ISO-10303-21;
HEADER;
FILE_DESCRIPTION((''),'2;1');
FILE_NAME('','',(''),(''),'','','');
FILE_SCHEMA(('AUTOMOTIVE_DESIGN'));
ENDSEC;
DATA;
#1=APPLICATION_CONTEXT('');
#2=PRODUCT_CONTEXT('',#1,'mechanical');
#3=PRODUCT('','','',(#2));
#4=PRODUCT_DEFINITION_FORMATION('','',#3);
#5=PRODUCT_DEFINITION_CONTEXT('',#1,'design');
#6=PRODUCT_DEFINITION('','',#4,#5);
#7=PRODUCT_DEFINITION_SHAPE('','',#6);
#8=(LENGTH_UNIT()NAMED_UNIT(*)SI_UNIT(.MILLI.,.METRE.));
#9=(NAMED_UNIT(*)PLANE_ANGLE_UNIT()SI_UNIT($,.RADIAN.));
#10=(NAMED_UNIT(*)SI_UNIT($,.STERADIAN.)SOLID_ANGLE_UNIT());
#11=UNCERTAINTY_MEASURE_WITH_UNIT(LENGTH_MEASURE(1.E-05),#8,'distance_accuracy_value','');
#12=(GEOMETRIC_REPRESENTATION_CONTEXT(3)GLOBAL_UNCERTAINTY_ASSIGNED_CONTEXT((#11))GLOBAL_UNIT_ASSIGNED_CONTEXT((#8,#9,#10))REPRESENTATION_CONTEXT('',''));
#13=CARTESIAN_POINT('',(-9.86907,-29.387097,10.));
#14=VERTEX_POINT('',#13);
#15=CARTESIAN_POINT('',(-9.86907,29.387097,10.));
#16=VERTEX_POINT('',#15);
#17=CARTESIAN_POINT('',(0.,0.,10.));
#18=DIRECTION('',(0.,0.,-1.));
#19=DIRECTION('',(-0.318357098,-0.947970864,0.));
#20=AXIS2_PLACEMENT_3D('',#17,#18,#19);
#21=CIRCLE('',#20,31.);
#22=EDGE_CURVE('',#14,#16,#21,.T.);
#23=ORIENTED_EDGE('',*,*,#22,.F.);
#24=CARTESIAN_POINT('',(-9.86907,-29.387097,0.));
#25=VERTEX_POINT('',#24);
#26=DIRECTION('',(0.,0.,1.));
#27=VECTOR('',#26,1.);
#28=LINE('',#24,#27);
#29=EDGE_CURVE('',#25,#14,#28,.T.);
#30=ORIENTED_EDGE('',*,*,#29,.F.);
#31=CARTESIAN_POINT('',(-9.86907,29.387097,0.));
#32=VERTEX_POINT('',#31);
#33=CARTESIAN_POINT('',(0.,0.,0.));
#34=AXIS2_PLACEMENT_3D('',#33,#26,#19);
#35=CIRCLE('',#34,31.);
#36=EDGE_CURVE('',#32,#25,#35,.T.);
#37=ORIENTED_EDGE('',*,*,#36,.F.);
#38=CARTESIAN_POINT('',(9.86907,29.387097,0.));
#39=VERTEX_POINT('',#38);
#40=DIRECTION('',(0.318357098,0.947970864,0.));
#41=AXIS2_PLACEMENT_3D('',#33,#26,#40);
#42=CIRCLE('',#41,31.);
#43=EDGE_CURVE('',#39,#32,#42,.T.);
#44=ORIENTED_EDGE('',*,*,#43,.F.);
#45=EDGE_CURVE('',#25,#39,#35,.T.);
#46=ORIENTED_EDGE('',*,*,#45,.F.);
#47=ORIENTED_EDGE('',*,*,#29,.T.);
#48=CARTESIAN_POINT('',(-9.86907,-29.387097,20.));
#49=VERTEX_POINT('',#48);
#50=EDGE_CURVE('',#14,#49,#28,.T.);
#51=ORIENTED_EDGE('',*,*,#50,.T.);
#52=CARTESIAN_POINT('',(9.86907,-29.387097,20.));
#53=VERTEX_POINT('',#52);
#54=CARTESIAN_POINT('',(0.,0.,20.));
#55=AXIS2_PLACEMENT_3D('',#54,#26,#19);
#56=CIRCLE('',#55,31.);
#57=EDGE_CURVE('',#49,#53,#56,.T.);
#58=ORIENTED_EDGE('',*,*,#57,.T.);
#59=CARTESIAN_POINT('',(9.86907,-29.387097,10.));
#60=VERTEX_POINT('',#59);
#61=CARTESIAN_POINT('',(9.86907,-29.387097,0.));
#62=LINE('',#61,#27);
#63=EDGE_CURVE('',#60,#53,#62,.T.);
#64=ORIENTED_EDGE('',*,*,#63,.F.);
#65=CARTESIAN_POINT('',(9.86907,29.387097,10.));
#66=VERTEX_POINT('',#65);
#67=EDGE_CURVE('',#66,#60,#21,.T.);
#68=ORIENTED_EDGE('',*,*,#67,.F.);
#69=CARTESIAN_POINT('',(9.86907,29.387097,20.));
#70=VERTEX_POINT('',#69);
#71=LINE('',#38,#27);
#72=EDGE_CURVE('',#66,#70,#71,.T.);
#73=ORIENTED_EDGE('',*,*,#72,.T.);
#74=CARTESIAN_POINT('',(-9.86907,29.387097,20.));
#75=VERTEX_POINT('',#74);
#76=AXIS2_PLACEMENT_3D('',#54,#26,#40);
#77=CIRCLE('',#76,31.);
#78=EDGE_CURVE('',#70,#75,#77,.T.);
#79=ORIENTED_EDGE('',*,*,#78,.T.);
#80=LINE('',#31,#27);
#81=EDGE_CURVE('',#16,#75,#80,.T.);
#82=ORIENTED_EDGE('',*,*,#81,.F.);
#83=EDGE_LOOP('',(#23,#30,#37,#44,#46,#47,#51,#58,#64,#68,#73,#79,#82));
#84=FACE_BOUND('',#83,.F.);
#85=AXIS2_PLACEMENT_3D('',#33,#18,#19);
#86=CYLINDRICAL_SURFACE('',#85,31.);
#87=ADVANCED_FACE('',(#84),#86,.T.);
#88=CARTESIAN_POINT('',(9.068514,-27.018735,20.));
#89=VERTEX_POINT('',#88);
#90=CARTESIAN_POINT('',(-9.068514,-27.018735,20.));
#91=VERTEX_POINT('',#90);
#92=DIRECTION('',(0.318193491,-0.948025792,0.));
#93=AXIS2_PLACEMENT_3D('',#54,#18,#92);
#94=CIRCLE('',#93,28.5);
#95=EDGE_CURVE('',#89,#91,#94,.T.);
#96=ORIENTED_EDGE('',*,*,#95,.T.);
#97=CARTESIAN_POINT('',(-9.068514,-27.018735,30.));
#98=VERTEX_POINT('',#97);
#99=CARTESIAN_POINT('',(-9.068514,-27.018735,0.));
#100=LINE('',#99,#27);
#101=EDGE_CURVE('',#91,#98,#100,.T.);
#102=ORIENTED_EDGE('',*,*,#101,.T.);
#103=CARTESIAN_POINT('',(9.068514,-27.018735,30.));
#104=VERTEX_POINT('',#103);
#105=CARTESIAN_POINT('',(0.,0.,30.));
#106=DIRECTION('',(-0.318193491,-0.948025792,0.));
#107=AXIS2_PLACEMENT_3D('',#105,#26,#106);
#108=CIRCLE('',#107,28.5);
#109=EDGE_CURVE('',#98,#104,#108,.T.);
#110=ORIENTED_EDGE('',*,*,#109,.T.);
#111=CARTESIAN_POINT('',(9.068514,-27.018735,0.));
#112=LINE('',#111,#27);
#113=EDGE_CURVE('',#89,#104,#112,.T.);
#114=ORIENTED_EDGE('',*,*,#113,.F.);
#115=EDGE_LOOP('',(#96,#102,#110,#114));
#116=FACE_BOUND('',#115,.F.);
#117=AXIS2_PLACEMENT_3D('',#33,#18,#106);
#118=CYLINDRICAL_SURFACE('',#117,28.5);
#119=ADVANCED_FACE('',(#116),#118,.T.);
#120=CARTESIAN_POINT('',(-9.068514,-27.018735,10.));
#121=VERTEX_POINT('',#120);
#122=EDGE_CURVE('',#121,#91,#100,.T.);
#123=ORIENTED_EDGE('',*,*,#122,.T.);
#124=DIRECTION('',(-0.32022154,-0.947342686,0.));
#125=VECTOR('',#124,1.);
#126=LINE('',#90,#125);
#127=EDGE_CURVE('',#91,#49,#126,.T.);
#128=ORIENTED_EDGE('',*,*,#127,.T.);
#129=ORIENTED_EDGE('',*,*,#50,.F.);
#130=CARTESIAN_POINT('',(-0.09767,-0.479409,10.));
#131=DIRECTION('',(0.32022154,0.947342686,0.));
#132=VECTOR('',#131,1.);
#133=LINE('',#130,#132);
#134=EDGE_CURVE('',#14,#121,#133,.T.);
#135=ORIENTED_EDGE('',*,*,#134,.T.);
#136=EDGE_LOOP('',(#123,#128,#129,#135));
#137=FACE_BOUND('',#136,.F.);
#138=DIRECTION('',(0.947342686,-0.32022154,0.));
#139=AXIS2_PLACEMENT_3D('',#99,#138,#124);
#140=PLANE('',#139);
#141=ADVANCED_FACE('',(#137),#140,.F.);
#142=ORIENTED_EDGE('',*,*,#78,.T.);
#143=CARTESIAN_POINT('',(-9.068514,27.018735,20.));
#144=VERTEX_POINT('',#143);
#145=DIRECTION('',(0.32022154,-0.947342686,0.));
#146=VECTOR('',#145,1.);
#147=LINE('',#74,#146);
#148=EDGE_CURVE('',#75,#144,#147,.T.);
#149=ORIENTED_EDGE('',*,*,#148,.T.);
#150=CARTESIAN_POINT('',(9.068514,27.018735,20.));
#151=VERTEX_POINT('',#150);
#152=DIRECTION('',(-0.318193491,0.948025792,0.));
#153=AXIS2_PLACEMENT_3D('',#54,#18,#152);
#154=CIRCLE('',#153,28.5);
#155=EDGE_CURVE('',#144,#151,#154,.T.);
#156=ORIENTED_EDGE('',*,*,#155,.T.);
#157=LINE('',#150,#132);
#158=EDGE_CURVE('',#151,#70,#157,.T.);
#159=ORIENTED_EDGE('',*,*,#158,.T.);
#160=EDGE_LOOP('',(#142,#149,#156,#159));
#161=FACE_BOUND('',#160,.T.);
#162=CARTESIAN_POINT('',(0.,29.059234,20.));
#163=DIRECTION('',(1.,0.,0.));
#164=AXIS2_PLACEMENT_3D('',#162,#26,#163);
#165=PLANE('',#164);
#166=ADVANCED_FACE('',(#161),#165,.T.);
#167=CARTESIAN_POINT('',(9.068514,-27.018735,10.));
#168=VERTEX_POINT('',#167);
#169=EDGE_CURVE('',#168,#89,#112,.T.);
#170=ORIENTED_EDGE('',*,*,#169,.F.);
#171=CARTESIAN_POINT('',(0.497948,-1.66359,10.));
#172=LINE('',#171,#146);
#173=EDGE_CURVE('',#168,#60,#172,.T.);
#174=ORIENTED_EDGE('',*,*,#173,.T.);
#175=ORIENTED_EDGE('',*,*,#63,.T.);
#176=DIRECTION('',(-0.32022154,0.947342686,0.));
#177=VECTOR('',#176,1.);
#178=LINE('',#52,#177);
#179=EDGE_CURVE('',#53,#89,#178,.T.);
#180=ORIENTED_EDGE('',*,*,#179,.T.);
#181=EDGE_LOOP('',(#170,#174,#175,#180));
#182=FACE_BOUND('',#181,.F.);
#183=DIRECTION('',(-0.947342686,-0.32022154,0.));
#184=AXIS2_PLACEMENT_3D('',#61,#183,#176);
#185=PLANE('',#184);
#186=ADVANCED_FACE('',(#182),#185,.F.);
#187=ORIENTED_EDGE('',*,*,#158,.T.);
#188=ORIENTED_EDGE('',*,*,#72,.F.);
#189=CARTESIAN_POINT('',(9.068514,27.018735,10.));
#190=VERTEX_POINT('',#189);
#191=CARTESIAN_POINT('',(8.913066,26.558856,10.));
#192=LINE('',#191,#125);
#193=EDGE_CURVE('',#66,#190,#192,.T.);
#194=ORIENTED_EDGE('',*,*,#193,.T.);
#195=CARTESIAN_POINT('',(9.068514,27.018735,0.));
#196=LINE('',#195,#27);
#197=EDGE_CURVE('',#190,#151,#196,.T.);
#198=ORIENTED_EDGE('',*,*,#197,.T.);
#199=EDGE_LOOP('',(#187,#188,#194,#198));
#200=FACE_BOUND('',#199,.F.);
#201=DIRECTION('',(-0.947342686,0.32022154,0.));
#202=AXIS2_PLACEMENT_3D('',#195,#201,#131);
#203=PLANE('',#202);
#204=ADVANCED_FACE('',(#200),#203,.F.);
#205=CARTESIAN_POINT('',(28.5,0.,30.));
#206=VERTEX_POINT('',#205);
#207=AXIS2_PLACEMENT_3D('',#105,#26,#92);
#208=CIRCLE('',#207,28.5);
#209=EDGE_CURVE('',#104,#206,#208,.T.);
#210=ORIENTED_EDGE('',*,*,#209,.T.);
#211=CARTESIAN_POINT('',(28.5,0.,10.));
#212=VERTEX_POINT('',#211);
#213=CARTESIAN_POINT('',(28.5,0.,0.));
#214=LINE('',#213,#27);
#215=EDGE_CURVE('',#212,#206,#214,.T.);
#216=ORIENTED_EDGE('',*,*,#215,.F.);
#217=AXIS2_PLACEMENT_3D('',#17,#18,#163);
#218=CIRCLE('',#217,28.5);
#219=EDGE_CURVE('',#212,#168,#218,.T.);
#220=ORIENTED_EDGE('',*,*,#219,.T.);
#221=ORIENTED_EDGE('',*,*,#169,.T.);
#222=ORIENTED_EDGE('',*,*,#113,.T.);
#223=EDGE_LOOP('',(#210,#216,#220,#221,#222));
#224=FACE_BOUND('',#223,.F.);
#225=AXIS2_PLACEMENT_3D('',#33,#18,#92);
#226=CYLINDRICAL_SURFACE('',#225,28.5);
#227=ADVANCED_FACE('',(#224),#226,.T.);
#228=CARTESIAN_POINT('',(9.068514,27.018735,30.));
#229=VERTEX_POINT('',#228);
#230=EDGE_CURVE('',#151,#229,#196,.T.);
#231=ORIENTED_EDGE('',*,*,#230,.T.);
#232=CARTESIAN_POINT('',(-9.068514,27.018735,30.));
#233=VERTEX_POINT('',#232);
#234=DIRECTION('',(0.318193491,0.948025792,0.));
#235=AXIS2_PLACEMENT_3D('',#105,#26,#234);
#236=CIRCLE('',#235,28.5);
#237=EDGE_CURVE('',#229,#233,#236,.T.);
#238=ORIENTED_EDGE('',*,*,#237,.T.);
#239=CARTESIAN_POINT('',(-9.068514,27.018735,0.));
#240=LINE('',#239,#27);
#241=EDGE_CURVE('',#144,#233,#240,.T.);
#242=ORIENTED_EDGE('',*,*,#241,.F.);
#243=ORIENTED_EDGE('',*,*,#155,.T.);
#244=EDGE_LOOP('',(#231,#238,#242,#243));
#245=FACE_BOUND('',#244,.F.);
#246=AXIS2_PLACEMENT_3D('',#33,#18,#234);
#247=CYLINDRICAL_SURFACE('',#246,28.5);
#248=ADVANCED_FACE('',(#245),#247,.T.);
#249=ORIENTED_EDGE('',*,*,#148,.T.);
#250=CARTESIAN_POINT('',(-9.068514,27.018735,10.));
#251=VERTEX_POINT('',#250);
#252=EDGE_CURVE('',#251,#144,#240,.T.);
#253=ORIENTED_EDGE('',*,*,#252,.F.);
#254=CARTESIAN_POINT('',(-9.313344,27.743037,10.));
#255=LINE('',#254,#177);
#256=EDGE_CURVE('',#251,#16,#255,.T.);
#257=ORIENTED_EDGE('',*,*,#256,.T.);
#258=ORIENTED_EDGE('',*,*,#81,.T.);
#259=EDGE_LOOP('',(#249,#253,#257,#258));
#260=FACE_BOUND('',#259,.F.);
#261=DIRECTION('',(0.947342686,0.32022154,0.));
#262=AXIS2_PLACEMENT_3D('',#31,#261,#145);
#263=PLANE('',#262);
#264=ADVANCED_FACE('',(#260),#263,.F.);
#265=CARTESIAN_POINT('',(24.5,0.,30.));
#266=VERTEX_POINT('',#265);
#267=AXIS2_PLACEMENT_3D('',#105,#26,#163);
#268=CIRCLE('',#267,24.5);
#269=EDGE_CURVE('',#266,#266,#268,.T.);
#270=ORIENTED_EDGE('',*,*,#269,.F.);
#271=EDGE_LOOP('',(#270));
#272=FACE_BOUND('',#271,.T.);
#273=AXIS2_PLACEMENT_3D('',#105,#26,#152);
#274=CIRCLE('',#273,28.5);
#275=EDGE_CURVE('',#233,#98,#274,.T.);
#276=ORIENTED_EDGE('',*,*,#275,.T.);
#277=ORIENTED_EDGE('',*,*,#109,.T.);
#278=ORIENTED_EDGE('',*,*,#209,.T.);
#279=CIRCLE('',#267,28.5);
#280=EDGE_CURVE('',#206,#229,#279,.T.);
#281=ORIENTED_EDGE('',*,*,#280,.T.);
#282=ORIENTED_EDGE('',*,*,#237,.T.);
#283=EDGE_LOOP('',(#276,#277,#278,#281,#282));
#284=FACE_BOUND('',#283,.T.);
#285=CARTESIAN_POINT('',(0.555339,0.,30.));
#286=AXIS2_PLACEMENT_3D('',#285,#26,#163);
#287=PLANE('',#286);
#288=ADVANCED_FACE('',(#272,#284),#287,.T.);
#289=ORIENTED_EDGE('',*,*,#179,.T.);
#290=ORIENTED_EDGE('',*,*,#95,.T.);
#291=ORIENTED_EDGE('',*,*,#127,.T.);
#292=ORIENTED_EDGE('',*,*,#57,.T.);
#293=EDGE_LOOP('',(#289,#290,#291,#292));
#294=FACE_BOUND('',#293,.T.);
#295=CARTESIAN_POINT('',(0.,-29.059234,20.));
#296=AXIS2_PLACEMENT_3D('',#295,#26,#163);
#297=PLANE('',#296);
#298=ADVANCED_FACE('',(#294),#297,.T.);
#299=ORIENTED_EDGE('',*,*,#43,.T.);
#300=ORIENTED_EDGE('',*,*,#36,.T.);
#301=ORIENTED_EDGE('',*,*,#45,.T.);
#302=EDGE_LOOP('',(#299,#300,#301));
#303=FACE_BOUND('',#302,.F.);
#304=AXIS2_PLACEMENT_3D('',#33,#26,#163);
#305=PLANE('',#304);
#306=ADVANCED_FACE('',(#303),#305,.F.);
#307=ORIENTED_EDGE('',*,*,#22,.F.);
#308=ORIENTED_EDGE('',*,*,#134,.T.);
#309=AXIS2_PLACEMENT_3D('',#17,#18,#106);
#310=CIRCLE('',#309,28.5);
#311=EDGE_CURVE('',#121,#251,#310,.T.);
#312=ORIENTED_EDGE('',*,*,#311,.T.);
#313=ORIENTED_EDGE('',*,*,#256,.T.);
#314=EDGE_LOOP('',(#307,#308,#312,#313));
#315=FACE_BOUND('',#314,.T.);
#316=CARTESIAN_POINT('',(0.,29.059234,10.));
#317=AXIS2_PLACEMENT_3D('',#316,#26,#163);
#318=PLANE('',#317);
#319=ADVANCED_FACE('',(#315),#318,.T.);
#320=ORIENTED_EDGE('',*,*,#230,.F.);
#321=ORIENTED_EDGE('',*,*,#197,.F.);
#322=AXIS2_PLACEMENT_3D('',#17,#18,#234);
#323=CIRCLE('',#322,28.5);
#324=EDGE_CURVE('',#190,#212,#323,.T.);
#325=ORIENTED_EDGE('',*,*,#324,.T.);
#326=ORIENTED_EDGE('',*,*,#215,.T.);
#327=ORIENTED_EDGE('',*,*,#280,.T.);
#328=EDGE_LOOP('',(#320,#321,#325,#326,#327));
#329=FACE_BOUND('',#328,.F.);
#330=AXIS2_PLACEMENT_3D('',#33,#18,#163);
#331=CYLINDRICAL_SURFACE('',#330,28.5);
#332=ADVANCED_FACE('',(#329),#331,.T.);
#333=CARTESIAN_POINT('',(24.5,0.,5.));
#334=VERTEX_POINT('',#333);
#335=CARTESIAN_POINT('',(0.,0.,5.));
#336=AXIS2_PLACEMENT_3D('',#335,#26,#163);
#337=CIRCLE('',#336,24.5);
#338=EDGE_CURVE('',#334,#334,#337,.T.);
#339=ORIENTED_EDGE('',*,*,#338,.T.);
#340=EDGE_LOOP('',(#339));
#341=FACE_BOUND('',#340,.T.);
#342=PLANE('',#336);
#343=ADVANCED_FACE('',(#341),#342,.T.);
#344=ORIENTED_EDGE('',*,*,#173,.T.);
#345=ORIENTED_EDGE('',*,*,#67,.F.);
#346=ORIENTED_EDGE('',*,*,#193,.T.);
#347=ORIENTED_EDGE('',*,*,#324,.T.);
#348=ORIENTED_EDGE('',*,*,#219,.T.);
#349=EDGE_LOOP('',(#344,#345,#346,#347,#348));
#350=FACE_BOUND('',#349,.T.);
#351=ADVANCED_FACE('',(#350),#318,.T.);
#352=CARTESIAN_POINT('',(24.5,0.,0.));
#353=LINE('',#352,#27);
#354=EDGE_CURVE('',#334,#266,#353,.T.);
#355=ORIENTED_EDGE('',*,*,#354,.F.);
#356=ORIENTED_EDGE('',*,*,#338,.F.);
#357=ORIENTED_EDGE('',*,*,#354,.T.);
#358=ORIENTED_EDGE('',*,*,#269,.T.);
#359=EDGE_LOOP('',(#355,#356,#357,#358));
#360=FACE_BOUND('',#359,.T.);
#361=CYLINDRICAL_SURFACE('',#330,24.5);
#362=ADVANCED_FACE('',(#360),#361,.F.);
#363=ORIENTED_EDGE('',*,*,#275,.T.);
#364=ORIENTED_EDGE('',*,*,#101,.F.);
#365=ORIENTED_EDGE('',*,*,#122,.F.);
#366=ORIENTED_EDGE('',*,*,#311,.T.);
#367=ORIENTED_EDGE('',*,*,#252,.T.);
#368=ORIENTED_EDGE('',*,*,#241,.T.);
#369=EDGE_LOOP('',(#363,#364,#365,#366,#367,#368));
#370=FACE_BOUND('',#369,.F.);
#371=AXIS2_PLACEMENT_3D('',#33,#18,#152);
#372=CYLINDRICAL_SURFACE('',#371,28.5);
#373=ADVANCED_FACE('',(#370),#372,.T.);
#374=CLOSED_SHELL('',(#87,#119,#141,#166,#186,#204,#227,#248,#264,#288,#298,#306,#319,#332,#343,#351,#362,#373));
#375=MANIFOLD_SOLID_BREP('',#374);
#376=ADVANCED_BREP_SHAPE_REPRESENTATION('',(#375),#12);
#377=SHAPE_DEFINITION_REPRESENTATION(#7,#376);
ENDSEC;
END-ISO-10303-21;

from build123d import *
from build123d import SkipClean  # not in build123d's __all__

# Parameters (mm, degrees)
F1_DEPTH = 10
F0_R     = 24.5
F2_DEPTH = 30
F3_DEPTH = 20
F4_DEPTH = 20
F5_DEPTH = 30
F6_DEPTH = 5


with BuildPart() as f1:
    # F0 (on Top) → F1 (new body)
    with BuildSketch(Plane.XY):
        with BuildLine():
            ThreePointArc((-9.06851449, 27.018735073), (0, 28.5), (9.06851449, 27.018735073))
            Line((9.06851449, 27.018735073), (9.8690700263, 29.3870967742))
            ThreePointArc((9.8690700263, 29.3870967742), (0, 31), (-9.8690700263, 29.3870967742))
            Line((-9.8690700263, 29.3870967742), (-9.06851449, 27.018735073))
        make_face()
        with BuildLine():
            ThreePointArc((-9.06851449, -27.018735073), (-28.5, 0), (-9.06851449, 27.018735073))
            Line((-9.06851449, 27.018735073), (-9.8690700263, 29.3870967742))
            ThreePointArc((-9.8690700263, 29.3870967742), (-31, 0), (-9.8690700263, -29.3870967742))
            Line((-9.8690700263, -29.3870967742), (-9.06851449, -27.018735073))
        make_face()
        with BuildLine():
            Line((9.8690700263, -29.3870967742), (9.06851449, -27.018735073))
            ThreePointArc((9.06851449, -27.018735073), (0, -28.5), (-9.06851449, -27.018735073))
            Line((-9.06851449, -27.018735073), (-9.8690700263, -29.3870967742))
            ThreePointArc((-9.8690700263, -29.3870967742), (0, -31), (9.8690700263, -29.3870967742))
        make_face()
        with BuildLine():
            ThreePointArc((9.06851449, 27.018735073), (23.1376604583, 16.6402724893), (28.5, 0))
            ThreePointArc((28.5, 0), (23.1376604583, -16.6402724893), (9.06851449, -27.018735073))
            Line((9.06851449, -27.018735073), (9.8690700263, -29.3870967742))
            ThreePointArc((9.8690700263, -29.3870967742), (25.1688415587, -18.0977737469), (31, 0))
            ThreePointArc((31, 0), (25.1688415587, 18.0977737469), (9.8690700263, 29.3870967742))
            Line((9.8690700263, 29.3870967742), (9.06851449, 27.018735073))
        make_face()
    extrude(amount=F1_DEPTH)

    # F0 (on Top) → F2 (cut)
    with BuildSketch(Plane.XY):
        with BuildLine():
            ThreePointArc((9.06851449, -27.018735073), (23.1376604583, -16.6402724893), (28.5, 0))
            ThreePointArc((28.5, 0), (23.1376604583, 16.6402724893), (9.06851449, 27.018735073))
            ThreePointArc((9.06851449, 27.018735073), (0, 28.5), (-9.06851449, 27.018735073))
            ThreePointArc((-9.06851449, 27.018735073), (-28.5, 0), (-9.06851449, -27.018735073))
            ThreePointArc((-9.06851449, -27.018735073), (0, -28.5), (9.06851449, -27.018735073))
        make_face()
        Circle(F0_R, mode=Mode.SUBTRACT)
    extrude(amount=F2_DEPTH, mode=Mode.SUBTRACT)

    # F0 (on Top) → F3 (join)
    with BuildSketch(Plane.XY):
        with BuildLine():
            ThreePointArc((-9.06851449, 27.018735073), (0, 28.5), (9.06851449, 27.018735073))
            Line((9.06851449, 27.018735073), (9.8690700263, 29.3870967742))
            ThreePointArc((9.8690700263, 29.3870967742), (0, 31), (-9.8690700263, 29.3870967742))
            Line((-9.8690700263, 29.3870967742), (-9.06851449, 27.018735073))
        make_face()
    with SkipClean():  # cleaning this boolean's faces spoils the solid; the shape is the same uncleaned
        extrude(amount=F3_DEPTH)

    # F0 (on Top) → F4 (join)
    with BuildSketch(Plane.XY):
        with BuildLine():
            Line((9.8690700263, -29.3870967742), (9.06851449, -27.018735073))
            ThreePointArc((9.06851449, -27.018735073), (0, -28.5), (-9.06851449, -27.018735073))
            Line((-9.06851449, -27.018735073), (-9.8690700263, -29.3870967742))
            ThreePointArc((-9.8690700263, -29.3870967742), (0, -31), (9.8690700263, -29.3870967742))
        make_face()
    with SkipClean():  # cleaning this boolean's faces spoils the solid; the shape is the same uncleaned
        extrude(amount=F4_DEPTH)

    # F0 (on Top) → F5 (join)
    with BuildSketch(Plane.XY):
        with BuildLine():
            ThreePointArc((9.06851449, -27.018735073), (23.1376604583, -16.6402724893), (28.5, 0))
            ThreePointArc((28.5, 0), (23.1376604583, 16.6402724893), (9.06851449, 27.018735073))
            ThreePointArc((9.06851449, 27.018735073), (0, 28.5), (-9.06851449, 27.018735073))
            ThreePointArc((-9.06851449, 27.018735073), (-28.5, 0), (-9.06851449, -27.018735073))
            ThreePointArc((-9.06851449, -27.018735073), (0, -28.5), (9.06851449, -27.018735073))
        make_face()
        Circle(F0_R, mode=Mode.SUBTRACT)
    extrude(amount=F5_DEPTH)

    # F0 (on Top) → F6 (join)
    with BuildSketch(Plane.XY):
        Circle(F0_R)
    extrude(amount=F6_DEPTH)


solid = f1.part
